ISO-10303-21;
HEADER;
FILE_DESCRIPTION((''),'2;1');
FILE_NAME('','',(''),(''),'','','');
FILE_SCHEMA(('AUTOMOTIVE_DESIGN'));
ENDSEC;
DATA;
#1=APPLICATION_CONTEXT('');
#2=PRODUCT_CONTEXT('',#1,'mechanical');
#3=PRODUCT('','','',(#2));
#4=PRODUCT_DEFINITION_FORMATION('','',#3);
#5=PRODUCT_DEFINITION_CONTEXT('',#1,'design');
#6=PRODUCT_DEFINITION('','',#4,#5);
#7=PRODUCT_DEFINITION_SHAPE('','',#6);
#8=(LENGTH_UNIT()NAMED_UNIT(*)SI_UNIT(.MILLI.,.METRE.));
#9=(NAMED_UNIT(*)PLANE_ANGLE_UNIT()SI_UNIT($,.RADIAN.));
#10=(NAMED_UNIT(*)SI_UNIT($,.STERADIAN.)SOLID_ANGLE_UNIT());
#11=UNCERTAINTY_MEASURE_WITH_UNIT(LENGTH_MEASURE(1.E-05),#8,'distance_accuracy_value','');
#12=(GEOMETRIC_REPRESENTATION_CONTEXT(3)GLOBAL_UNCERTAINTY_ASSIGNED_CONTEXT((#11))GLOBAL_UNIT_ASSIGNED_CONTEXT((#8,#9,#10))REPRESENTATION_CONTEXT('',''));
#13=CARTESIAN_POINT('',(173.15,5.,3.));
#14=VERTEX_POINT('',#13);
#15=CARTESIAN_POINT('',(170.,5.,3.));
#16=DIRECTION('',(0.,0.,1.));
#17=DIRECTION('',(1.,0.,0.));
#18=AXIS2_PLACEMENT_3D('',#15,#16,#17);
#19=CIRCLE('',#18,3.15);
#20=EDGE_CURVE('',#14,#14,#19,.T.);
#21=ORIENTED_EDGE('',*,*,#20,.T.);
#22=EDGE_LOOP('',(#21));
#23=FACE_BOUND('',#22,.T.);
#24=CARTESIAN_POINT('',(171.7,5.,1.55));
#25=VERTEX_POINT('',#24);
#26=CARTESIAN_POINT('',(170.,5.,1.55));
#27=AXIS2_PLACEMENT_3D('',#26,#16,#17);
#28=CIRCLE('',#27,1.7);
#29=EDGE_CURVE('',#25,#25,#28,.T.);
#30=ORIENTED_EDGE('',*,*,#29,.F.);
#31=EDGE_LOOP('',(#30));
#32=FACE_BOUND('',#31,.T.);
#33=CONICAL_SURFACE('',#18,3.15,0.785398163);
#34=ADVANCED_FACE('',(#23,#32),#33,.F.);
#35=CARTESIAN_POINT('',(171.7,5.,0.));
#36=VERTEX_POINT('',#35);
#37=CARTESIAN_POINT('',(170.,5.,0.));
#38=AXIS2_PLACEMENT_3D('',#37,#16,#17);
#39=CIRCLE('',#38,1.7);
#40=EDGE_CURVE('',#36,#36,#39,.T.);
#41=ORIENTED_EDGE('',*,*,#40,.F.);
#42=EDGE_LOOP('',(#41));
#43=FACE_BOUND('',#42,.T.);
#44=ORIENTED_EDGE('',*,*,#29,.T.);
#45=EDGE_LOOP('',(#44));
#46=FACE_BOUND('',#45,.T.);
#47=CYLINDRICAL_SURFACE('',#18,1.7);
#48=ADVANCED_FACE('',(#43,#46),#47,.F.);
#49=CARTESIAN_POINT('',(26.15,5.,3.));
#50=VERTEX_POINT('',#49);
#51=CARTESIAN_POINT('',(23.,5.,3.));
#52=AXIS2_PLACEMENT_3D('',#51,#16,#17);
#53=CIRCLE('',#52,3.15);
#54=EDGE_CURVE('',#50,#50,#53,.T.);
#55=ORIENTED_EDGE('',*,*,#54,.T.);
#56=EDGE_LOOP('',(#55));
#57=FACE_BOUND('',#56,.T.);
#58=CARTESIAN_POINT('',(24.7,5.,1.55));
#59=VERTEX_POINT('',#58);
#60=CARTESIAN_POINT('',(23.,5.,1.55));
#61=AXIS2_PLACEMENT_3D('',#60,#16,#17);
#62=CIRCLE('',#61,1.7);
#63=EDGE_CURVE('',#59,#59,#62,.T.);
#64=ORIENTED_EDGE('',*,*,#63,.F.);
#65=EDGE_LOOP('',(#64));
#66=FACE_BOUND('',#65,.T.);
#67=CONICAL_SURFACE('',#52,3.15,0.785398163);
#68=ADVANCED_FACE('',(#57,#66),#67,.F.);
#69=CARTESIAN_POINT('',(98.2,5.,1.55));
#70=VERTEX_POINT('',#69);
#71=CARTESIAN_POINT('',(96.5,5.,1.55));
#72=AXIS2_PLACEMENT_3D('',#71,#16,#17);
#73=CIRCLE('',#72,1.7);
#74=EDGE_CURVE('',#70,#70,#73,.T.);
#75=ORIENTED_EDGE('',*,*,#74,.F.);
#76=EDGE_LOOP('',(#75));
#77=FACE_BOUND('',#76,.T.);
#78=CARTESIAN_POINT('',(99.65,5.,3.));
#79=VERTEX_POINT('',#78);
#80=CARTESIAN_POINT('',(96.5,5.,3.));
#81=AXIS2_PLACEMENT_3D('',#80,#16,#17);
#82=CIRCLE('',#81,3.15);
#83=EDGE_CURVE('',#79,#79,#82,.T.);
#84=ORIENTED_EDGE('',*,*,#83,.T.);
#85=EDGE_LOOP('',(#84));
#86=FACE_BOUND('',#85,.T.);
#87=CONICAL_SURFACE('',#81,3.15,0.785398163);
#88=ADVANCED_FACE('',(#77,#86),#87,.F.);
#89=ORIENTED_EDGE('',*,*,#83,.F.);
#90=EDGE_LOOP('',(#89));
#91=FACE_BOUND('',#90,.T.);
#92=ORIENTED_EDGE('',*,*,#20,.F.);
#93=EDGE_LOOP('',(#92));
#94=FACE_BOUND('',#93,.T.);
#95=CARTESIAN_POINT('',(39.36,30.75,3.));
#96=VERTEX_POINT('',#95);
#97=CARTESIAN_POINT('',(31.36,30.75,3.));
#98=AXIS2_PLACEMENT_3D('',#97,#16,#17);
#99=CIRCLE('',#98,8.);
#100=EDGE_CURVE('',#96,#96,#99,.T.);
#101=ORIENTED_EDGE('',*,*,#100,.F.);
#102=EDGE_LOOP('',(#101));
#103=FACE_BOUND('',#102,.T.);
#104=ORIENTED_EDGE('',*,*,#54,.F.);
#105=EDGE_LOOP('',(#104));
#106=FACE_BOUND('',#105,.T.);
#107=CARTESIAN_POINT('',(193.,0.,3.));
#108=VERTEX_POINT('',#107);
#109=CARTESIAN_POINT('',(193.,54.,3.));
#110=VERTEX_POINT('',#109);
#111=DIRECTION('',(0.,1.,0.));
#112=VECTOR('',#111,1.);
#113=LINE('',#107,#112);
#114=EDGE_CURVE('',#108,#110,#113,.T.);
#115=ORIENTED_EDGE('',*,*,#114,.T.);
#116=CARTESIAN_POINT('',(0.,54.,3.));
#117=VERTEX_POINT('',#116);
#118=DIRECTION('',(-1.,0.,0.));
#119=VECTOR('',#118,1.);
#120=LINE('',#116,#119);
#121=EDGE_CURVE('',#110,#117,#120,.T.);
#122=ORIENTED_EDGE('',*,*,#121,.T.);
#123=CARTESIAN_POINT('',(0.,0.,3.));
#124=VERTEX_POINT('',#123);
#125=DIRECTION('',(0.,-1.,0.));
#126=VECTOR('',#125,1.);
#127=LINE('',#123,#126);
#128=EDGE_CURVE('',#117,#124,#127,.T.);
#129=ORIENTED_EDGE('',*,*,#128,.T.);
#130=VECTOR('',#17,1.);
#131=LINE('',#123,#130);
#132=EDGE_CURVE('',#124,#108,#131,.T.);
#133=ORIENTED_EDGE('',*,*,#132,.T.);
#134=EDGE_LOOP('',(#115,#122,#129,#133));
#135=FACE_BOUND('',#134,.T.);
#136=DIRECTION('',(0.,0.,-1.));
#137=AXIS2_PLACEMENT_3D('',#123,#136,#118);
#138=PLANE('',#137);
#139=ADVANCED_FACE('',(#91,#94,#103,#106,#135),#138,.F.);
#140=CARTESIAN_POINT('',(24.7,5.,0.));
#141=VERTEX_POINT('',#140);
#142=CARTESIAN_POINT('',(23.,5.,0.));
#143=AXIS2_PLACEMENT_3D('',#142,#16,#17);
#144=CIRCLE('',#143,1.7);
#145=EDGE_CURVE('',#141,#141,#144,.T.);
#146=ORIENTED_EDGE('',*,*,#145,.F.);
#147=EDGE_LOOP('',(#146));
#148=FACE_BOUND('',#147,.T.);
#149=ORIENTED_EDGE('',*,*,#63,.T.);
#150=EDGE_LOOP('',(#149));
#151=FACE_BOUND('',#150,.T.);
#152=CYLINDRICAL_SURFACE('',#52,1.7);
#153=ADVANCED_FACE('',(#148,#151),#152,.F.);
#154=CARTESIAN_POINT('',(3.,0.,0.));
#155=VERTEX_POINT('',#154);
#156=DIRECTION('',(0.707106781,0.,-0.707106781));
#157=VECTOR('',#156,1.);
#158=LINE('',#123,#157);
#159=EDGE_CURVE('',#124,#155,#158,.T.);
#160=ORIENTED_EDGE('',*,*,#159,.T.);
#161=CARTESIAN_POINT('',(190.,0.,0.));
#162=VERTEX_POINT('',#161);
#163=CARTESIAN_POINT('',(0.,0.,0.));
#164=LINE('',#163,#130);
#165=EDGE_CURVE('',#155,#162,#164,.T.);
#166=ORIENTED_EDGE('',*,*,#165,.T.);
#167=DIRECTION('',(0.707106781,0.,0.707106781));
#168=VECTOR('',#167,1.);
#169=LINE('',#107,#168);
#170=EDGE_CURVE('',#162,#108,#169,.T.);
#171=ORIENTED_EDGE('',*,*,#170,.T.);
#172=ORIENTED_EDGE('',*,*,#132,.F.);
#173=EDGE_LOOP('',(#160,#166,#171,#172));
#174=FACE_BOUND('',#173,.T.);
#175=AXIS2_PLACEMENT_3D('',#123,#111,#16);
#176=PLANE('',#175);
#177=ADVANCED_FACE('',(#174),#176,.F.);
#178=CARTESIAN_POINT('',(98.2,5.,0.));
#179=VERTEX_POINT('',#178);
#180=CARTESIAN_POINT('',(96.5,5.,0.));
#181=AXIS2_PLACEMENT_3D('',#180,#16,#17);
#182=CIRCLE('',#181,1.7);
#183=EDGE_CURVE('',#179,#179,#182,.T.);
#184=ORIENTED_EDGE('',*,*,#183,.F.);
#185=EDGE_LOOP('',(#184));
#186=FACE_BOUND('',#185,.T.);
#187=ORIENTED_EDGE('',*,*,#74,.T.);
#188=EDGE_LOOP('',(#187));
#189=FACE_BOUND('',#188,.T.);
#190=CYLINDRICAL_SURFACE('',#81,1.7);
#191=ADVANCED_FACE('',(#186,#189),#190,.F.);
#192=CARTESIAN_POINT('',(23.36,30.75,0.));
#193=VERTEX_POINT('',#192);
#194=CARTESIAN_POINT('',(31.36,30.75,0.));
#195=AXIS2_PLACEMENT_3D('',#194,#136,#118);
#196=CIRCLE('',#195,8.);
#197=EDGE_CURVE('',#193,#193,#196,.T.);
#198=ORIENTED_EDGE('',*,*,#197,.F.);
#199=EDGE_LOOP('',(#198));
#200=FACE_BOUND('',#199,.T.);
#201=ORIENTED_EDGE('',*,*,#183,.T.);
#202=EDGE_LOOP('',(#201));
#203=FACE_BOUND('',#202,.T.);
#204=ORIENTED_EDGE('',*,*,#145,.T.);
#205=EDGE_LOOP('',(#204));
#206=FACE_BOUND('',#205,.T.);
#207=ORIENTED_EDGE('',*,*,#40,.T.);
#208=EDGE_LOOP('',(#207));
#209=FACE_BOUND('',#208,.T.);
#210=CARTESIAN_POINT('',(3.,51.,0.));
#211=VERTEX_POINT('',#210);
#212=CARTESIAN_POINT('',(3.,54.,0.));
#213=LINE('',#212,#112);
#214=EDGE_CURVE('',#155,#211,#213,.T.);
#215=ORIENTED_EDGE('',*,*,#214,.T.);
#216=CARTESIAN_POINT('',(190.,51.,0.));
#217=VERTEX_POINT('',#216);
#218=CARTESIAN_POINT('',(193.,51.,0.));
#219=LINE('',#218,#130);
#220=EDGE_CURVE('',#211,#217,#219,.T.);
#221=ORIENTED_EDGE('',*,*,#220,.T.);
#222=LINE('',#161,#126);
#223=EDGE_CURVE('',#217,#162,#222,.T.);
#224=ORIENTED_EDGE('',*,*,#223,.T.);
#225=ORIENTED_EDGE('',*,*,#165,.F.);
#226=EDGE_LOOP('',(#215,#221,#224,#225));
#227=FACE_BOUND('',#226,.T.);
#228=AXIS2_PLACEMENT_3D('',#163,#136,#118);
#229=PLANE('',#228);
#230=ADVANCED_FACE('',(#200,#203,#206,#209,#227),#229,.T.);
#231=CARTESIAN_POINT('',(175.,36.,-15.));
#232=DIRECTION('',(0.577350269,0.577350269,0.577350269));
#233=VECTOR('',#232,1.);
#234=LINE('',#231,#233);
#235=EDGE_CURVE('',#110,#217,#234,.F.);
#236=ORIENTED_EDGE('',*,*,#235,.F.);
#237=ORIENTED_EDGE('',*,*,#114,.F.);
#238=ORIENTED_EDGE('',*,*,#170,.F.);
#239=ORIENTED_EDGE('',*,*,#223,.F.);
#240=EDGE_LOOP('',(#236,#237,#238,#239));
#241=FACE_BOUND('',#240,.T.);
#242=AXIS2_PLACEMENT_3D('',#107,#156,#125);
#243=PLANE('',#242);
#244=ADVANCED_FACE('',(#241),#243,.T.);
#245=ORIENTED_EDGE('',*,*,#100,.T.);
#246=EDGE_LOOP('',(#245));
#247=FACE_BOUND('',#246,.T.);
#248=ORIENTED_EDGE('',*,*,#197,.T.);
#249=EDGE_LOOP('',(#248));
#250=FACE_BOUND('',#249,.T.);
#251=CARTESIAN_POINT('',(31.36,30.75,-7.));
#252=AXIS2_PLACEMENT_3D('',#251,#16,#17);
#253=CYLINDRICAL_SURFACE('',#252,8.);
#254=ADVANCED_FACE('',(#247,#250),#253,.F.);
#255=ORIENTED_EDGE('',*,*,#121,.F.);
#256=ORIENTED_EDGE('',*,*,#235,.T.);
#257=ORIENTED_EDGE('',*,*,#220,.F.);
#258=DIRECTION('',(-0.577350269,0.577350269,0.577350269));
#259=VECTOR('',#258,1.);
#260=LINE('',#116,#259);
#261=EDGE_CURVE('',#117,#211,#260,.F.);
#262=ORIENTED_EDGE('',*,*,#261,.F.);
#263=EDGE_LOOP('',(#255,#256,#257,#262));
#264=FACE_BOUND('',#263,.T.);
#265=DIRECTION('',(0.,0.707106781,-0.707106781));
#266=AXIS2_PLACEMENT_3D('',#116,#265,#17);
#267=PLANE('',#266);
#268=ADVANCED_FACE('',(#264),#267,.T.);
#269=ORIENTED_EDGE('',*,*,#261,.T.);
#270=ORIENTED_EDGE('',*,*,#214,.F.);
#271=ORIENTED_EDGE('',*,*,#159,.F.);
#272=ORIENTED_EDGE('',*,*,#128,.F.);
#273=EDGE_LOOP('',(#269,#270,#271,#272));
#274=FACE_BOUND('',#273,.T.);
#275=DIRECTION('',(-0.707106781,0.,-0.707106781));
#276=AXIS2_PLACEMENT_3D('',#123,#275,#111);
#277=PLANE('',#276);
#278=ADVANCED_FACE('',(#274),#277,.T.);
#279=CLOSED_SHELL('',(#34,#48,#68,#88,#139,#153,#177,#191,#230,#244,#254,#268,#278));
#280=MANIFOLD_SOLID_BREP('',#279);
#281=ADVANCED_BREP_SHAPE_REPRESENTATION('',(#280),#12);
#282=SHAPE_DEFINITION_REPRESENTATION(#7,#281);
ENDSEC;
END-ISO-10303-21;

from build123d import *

# Parameters (mm, degrees)
SKETCH1_W                                      = 193
SKETCH1_H                                      = 54
BOSS_EXTRUDE1_DEPTH                            = 3
CHAMFER1_SIZE                                  = 3
CSK_FOR_M3_FLAT_HEAD_MACHINE_SCREW1_AT_2_COUNT = 2
CSK_FOR_M3_FLAT_HEAD_MACHINE_SCREW1_AT_2_PITCH = 73.5
CSK_FOR_M3_FLAT_HEAD_MACHINE_SCREW1_AT_3_COUNT = 2
CSK_FOR_M3_FLAT_HEAD_MACHINE_SCREW1_AT_3_PITCH = 147
SKETCH5_R                                      = 8
CUT_EXTRUDE1_DEPTH                             = 10


with BuildPart() as part:
    # Sketch1 → Boss-Extrude1 (new body)
    with BuildSketch(Plane.XY):
        with Locations((96.5, 27)):
            Rectangle(SKETCH1_W, SKETCH1_H)
    extrude(amount=BOSS_EXTRUDE1_DEPTH)

    # Chamfer1
    chamfer1_edges = [part.edges().sort_by_distance(p)[0] for p in [
        (0, 27, 0),
        (96.5, 54, 0),
        (193, 27, 0),
    ]]
    chamfer(chamfer1_edges, length=CHAMFER1_SIZE - 0.0001)  # a hair under: the kernel refuses the full size

    # Sketch3 → CSK for M3 Flat Head Machine Screw1 (revolve, cut)
    with BuildSketch(Plane(origin=(23, 5, 3), x_dir=(0, -1, 0), z_dir=(1, 0, 0))):
        Polygon((0, 0), (0, 3), (1.7, 3), (1.7, 1.45), (3.15, 0), align=None)
    csk_for_m3_flat_head_machine_screw1 = revolve(axis=Axis((23, 5, 9.35), (0, 0, -1)), mode=Mode.SUBTRACT)

    # CSK for M3 Flat Head Machine Screw1 at 2: CSK for M3 Flat Head Machine Screw1 ×2
    with Locations(*[(i * CSK_FOR_M3_FLAT_HEAD_MACHINE_SCREW1_AT_2_PITCH, 0, 0) for i in range(1, CSK_FOR_M3_FLAT_HEAD_MACHINE_SCREW1_AT_2_COUNT)]):
        add(csk_for_m3_flat_head_machine_screw1, mode=Mode.SUBTRACT)

    # CSK for M3 Flat Head Machine Screw1 at 3: CSK for M3 Flat Head Machine Screw1 ×2
    with Locations(*[(i * CSK_FOR_M3_FLAT_HEAD_MACHINE_SCREW1_AT_3_PITCH, 0, 0) for i in range(1, CSK_FOR_M3_FLAT_HEAD_MACHINE_SCREW1_AT_3_COUNT)]):
        add(csk_for_m3_flat_head_machine_screw1, mode=Mode.SUBTRACT)

    # Sketch5 → Cut-Extrude1 (cut)
    with BuildSketch(Plane.XY.offset(3)):
        with Locations((31.36, 30.75)):
            Circle(SKETCH5_R)
    extrude(amount=-CUT_EXTRUDE1_DEPTH, mode=Mode.SUBTRACT)


solid = part.part
